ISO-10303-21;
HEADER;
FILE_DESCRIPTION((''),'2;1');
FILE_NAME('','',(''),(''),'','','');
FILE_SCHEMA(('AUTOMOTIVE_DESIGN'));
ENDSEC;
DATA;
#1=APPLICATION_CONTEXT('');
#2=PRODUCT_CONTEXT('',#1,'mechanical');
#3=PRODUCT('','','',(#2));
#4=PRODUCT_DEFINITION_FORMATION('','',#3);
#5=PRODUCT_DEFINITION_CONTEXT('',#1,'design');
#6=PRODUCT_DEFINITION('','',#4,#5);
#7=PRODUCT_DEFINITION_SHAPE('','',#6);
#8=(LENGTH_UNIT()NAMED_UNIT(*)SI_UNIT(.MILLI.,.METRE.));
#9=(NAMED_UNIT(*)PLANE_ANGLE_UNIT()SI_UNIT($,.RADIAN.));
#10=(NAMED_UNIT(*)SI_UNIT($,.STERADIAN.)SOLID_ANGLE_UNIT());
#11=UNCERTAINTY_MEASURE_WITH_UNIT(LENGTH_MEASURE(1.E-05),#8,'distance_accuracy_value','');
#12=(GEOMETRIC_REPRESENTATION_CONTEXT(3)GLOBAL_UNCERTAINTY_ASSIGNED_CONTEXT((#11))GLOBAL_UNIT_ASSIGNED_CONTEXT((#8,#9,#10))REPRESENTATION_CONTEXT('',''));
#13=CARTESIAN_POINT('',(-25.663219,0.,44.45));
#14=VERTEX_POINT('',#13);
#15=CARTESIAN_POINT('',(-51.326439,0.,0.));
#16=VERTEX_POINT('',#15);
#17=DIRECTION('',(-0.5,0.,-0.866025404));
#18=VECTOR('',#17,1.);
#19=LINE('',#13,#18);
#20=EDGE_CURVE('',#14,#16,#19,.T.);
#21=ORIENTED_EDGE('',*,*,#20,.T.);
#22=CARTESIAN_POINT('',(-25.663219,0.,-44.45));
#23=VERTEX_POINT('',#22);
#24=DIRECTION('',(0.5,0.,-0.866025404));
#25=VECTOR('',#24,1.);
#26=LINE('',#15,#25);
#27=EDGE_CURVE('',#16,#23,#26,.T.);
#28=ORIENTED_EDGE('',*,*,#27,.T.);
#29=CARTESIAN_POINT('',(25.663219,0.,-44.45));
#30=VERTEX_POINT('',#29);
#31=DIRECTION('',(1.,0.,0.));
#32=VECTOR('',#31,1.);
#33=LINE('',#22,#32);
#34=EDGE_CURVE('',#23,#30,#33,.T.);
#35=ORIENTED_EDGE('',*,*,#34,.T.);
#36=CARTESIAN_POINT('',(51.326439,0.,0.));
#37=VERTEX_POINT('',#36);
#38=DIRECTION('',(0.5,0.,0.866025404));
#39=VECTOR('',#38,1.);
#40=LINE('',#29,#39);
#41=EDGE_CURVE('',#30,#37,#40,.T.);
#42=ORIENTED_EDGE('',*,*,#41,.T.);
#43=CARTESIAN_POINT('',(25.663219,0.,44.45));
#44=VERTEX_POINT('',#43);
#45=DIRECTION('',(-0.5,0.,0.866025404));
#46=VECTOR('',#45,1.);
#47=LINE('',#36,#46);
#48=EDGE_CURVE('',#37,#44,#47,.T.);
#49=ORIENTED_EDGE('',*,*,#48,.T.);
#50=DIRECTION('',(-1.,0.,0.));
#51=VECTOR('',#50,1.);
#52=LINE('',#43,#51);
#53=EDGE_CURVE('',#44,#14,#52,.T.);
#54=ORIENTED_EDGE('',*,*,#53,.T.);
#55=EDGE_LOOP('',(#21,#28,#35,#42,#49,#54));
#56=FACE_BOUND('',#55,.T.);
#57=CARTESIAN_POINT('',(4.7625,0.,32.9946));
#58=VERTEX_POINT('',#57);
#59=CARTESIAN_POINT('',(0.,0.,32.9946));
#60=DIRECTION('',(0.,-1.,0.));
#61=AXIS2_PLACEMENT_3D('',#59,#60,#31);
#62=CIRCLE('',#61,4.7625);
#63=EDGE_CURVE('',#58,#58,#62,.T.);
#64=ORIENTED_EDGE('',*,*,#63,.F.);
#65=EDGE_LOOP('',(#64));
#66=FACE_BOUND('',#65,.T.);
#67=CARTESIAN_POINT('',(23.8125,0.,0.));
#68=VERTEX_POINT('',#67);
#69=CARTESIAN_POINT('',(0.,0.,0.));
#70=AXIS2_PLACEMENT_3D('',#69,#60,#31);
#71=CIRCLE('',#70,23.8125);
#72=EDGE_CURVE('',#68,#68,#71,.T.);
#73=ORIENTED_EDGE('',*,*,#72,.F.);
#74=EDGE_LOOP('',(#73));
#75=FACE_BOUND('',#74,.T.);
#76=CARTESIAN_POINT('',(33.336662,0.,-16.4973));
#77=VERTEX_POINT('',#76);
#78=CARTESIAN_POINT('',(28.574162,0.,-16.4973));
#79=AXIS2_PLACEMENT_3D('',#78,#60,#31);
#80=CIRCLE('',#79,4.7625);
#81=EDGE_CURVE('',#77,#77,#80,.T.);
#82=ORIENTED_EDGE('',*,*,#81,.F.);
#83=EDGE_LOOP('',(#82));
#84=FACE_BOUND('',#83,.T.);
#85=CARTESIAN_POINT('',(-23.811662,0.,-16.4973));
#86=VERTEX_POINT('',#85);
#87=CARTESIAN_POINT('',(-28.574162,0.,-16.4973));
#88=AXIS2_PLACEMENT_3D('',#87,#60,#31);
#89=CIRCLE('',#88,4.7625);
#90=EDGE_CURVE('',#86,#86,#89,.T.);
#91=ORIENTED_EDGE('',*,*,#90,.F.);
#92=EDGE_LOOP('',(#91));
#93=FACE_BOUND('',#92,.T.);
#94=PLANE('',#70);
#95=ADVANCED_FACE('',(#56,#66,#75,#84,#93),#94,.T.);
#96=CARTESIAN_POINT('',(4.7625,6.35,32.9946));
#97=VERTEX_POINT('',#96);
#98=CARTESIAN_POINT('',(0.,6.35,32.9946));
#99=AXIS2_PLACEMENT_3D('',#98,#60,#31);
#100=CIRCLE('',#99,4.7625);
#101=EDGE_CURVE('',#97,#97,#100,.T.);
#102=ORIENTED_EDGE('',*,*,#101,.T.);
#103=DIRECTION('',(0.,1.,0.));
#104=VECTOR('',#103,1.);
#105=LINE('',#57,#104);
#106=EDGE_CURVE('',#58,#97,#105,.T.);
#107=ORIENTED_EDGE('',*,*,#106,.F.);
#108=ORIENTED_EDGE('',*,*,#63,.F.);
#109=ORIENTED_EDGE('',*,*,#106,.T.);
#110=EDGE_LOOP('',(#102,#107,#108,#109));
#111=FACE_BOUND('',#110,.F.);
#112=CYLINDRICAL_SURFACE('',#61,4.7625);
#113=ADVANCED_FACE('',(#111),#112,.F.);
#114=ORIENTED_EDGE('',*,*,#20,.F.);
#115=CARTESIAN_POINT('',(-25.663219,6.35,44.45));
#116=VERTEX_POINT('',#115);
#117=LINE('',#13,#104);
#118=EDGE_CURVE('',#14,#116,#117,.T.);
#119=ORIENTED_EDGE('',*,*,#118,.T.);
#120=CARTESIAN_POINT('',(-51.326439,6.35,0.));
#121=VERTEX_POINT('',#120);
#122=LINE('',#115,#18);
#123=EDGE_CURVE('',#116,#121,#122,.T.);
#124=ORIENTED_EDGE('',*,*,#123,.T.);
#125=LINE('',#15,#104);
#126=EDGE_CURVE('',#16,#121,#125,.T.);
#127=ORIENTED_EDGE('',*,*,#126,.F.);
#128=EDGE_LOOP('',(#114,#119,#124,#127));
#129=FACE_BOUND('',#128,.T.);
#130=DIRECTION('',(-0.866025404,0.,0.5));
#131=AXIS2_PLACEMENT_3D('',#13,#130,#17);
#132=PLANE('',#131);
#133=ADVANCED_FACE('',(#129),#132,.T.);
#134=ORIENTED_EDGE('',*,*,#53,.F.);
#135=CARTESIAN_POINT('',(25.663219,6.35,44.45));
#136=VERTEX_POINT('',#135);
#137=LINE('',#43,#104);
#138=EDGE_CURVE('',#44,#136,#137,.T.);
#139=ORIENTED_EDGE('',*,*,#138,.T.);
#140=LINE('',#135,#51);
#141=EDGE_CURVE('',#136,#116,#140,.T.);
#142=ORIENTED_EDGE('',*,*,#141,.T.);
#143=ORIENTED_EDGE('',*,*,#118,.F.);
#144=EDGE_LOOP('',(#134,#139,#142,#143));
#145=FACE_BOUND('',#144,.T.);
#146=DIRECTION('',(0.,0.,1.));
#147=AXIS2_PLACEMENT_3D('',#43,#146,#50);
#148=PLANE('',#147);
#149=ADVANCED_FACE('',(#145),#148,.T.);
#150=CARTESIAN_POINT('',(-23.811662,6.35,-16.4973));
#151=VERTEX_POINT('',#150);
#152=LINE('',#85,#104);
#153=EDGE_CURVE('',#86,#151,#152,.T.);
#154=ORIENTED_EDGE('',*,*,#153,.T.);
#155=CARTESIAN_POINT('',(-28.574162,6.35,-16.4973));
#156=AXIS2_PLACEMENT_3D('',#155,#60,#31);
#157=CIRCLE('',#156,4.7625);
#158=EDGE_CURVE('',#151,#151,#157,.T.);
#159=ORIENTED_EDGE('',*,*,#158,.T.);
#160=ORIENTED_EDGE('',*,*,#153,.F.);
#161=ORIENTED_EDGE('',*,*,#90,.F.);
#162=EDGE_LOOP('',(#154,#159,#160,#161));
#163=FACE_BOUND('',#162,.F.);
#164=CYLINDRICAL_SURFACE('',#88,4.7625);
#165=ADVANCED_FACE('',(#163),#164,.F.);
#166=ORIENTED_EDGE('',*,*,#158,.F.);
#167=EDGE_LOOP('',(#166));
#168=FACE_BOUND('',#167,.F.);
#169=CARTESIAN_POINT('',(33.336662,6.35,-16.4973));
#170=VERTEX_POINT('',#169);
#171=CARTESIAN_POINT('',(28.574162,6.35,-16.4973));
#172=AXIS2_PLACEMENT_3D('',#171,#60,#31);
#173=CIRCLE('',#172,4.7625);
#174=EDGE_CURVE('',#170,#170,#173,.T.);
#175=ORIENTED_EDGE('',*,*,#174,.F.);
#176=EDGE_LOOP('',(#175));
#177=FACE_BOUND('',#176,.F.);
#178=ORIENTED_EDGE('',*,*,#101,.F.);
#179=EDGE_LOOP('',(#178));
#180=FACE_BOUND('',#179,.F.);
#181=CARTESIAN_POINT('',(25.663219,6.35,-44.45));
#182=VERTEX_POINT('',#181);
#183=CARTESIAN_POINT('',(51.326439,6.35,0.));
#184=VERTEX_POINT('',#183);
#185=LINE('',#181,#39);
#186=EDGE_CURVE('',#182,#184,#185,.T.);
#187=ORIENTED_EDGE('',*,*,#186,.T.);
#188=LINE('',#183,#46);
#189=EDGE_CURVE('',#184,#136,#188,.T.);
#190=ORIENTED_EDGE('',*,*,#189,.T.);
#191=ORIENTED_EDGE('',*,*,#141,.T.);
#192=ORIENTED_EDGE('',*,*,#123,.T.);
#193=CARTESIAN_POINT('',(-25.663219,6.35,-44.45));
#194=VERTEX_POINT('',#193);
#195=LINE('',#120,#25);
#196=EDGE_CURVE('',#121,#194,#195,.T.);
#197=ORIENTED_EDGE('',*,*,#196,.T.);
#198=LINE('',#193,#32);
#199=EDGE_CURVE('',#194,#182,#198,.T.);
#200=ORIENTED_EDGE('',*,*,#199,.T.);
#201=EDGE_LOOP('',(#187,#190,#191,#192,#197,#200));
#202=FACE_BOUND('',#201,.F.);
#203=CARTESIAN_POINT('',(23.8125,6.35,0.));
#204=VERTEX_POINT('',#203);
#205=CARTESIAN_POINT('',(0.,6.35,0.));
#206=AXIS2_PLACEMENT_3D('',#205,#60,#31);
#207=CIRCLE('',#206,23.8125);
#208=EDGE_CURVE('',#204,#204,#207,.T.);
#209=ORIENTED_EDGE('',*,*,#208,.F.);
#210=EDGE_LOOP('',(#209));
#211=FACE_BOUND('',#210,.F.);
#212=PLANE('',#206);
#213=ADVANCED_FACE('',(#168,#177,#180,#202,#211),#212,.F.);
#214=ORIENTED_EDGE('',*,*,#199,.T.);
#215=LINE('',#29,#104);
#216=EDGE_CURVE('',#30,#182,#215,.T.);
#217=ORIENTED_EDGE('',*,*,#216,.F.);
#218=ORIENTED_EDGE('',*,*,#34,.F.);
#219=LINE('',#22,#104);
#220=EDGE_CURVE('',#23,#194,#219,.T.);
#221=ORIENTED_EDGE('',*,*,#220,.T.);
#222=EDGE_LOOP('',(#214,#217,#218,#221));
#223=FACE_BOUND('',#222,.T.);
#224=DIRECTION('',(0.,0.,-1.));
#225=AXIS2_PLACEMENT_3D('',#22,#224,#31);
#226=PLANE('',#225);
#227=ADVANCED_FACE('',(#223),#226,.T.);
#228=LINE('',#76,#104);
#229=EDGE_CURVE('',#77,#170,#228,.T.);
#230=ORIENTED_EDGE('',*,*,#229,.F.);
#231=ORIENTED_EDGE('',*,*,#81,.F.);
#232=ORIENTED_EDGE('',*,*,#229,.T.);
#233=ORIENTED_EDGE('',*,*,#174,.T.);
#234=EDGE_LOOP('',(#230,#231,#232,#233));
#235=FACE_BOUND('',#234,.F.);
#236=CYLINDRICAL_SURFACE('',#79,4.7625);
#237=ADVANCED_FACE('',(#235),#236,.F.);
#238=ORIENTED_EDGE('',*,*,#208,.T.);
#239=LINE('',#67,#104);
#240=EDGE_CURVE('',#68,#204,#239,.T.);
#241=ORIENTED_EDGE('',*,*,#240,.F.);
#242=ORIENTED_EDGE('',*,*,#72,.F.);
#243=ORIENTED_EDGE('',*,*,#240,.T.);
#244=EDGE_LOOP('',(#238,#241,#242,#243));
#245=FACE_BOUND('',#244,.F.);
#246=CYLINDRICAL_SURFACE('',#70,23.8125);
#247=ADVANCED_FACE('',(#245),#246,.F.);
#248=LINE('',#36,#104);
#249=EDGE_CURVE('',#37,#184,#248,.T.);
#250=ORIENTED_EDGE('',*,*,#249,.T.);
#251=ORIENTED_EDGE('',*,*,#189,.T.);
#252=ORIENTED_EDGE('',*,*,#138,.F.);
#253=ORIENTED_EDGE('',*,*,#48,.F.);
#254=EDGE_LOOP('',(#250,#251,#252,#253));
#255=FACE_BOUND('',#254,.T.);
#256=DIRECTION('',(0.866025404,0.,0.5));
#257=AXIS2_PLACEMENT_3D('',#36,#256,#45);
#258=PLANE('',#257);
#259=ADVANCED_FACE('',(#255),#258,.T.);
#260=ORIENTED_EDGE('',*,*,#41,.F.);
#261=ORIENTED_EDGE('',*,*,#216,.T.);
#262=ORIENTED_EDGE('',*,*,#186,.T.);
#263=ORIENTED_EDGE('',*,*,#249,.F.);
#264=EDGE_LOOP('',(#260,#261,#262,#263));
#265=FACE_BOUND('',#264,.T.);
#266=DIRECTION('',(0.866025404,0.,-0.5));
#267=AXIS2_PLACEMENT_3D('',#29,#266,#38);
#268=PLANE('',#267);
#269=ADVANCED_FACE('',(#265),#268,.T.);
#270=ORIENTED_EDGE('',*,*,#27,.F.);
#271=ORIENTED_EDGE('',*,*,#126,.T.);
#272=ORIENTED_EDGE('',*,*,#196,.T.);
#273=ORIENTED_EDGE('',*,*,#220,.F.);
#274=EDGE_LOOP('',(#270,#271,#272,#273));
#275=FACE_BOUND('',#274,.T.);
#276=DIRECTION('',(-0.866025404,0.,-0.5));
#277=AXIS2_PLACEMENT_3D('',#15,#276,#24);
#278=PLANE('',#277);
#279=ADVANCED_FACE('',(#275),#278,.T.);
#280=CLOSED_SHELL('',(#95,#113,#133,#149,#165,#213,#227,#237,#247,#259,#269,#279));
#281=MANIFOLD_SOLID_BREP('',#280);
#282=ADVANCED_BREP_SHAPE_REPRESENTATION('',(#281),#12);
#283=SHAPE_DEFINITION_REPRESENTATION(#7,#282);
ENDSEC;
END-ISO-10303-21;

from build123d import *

# Parameters (mm, degrees)
F0_R     = 4.7625
F0_R_2   = 23.8125
F1_DEPTH = 6.35


# Not quite as in the source:
# - the program builds the solid bodies; features that only make, move or delete a surface that nothing else refers to are left out


with BuildPart() as f1:
    # F0 (on Front) → F1 (new body)
    with BuildSketch(Plane.XZ):
        Polygon((-25.6632194655, 44.45), (-51.326438931, 0), (-25.6632194655, -44.45), (25.6632194655, -44.45), (51.326438931, 0), (25.6632194655, 44.45), align=None)
        with Locations((-28.5741617877, -16.4973)):
            Circle(F0_R, mode=Mode.SUBTRACT)
        with Locations((28.5741617877, -16.4973)):
            Circle(F0_R, mode=Mode.SUBTRACT)
        Circle(F0_R_2, mode=Mode.SUBTRACT)
        with Locations((0, 32.9946)):
            Circle(F0_R, mode=Mode.SUBTRACT)
    extrude(amount=-F1_DEPTH)


solid = f1.part
